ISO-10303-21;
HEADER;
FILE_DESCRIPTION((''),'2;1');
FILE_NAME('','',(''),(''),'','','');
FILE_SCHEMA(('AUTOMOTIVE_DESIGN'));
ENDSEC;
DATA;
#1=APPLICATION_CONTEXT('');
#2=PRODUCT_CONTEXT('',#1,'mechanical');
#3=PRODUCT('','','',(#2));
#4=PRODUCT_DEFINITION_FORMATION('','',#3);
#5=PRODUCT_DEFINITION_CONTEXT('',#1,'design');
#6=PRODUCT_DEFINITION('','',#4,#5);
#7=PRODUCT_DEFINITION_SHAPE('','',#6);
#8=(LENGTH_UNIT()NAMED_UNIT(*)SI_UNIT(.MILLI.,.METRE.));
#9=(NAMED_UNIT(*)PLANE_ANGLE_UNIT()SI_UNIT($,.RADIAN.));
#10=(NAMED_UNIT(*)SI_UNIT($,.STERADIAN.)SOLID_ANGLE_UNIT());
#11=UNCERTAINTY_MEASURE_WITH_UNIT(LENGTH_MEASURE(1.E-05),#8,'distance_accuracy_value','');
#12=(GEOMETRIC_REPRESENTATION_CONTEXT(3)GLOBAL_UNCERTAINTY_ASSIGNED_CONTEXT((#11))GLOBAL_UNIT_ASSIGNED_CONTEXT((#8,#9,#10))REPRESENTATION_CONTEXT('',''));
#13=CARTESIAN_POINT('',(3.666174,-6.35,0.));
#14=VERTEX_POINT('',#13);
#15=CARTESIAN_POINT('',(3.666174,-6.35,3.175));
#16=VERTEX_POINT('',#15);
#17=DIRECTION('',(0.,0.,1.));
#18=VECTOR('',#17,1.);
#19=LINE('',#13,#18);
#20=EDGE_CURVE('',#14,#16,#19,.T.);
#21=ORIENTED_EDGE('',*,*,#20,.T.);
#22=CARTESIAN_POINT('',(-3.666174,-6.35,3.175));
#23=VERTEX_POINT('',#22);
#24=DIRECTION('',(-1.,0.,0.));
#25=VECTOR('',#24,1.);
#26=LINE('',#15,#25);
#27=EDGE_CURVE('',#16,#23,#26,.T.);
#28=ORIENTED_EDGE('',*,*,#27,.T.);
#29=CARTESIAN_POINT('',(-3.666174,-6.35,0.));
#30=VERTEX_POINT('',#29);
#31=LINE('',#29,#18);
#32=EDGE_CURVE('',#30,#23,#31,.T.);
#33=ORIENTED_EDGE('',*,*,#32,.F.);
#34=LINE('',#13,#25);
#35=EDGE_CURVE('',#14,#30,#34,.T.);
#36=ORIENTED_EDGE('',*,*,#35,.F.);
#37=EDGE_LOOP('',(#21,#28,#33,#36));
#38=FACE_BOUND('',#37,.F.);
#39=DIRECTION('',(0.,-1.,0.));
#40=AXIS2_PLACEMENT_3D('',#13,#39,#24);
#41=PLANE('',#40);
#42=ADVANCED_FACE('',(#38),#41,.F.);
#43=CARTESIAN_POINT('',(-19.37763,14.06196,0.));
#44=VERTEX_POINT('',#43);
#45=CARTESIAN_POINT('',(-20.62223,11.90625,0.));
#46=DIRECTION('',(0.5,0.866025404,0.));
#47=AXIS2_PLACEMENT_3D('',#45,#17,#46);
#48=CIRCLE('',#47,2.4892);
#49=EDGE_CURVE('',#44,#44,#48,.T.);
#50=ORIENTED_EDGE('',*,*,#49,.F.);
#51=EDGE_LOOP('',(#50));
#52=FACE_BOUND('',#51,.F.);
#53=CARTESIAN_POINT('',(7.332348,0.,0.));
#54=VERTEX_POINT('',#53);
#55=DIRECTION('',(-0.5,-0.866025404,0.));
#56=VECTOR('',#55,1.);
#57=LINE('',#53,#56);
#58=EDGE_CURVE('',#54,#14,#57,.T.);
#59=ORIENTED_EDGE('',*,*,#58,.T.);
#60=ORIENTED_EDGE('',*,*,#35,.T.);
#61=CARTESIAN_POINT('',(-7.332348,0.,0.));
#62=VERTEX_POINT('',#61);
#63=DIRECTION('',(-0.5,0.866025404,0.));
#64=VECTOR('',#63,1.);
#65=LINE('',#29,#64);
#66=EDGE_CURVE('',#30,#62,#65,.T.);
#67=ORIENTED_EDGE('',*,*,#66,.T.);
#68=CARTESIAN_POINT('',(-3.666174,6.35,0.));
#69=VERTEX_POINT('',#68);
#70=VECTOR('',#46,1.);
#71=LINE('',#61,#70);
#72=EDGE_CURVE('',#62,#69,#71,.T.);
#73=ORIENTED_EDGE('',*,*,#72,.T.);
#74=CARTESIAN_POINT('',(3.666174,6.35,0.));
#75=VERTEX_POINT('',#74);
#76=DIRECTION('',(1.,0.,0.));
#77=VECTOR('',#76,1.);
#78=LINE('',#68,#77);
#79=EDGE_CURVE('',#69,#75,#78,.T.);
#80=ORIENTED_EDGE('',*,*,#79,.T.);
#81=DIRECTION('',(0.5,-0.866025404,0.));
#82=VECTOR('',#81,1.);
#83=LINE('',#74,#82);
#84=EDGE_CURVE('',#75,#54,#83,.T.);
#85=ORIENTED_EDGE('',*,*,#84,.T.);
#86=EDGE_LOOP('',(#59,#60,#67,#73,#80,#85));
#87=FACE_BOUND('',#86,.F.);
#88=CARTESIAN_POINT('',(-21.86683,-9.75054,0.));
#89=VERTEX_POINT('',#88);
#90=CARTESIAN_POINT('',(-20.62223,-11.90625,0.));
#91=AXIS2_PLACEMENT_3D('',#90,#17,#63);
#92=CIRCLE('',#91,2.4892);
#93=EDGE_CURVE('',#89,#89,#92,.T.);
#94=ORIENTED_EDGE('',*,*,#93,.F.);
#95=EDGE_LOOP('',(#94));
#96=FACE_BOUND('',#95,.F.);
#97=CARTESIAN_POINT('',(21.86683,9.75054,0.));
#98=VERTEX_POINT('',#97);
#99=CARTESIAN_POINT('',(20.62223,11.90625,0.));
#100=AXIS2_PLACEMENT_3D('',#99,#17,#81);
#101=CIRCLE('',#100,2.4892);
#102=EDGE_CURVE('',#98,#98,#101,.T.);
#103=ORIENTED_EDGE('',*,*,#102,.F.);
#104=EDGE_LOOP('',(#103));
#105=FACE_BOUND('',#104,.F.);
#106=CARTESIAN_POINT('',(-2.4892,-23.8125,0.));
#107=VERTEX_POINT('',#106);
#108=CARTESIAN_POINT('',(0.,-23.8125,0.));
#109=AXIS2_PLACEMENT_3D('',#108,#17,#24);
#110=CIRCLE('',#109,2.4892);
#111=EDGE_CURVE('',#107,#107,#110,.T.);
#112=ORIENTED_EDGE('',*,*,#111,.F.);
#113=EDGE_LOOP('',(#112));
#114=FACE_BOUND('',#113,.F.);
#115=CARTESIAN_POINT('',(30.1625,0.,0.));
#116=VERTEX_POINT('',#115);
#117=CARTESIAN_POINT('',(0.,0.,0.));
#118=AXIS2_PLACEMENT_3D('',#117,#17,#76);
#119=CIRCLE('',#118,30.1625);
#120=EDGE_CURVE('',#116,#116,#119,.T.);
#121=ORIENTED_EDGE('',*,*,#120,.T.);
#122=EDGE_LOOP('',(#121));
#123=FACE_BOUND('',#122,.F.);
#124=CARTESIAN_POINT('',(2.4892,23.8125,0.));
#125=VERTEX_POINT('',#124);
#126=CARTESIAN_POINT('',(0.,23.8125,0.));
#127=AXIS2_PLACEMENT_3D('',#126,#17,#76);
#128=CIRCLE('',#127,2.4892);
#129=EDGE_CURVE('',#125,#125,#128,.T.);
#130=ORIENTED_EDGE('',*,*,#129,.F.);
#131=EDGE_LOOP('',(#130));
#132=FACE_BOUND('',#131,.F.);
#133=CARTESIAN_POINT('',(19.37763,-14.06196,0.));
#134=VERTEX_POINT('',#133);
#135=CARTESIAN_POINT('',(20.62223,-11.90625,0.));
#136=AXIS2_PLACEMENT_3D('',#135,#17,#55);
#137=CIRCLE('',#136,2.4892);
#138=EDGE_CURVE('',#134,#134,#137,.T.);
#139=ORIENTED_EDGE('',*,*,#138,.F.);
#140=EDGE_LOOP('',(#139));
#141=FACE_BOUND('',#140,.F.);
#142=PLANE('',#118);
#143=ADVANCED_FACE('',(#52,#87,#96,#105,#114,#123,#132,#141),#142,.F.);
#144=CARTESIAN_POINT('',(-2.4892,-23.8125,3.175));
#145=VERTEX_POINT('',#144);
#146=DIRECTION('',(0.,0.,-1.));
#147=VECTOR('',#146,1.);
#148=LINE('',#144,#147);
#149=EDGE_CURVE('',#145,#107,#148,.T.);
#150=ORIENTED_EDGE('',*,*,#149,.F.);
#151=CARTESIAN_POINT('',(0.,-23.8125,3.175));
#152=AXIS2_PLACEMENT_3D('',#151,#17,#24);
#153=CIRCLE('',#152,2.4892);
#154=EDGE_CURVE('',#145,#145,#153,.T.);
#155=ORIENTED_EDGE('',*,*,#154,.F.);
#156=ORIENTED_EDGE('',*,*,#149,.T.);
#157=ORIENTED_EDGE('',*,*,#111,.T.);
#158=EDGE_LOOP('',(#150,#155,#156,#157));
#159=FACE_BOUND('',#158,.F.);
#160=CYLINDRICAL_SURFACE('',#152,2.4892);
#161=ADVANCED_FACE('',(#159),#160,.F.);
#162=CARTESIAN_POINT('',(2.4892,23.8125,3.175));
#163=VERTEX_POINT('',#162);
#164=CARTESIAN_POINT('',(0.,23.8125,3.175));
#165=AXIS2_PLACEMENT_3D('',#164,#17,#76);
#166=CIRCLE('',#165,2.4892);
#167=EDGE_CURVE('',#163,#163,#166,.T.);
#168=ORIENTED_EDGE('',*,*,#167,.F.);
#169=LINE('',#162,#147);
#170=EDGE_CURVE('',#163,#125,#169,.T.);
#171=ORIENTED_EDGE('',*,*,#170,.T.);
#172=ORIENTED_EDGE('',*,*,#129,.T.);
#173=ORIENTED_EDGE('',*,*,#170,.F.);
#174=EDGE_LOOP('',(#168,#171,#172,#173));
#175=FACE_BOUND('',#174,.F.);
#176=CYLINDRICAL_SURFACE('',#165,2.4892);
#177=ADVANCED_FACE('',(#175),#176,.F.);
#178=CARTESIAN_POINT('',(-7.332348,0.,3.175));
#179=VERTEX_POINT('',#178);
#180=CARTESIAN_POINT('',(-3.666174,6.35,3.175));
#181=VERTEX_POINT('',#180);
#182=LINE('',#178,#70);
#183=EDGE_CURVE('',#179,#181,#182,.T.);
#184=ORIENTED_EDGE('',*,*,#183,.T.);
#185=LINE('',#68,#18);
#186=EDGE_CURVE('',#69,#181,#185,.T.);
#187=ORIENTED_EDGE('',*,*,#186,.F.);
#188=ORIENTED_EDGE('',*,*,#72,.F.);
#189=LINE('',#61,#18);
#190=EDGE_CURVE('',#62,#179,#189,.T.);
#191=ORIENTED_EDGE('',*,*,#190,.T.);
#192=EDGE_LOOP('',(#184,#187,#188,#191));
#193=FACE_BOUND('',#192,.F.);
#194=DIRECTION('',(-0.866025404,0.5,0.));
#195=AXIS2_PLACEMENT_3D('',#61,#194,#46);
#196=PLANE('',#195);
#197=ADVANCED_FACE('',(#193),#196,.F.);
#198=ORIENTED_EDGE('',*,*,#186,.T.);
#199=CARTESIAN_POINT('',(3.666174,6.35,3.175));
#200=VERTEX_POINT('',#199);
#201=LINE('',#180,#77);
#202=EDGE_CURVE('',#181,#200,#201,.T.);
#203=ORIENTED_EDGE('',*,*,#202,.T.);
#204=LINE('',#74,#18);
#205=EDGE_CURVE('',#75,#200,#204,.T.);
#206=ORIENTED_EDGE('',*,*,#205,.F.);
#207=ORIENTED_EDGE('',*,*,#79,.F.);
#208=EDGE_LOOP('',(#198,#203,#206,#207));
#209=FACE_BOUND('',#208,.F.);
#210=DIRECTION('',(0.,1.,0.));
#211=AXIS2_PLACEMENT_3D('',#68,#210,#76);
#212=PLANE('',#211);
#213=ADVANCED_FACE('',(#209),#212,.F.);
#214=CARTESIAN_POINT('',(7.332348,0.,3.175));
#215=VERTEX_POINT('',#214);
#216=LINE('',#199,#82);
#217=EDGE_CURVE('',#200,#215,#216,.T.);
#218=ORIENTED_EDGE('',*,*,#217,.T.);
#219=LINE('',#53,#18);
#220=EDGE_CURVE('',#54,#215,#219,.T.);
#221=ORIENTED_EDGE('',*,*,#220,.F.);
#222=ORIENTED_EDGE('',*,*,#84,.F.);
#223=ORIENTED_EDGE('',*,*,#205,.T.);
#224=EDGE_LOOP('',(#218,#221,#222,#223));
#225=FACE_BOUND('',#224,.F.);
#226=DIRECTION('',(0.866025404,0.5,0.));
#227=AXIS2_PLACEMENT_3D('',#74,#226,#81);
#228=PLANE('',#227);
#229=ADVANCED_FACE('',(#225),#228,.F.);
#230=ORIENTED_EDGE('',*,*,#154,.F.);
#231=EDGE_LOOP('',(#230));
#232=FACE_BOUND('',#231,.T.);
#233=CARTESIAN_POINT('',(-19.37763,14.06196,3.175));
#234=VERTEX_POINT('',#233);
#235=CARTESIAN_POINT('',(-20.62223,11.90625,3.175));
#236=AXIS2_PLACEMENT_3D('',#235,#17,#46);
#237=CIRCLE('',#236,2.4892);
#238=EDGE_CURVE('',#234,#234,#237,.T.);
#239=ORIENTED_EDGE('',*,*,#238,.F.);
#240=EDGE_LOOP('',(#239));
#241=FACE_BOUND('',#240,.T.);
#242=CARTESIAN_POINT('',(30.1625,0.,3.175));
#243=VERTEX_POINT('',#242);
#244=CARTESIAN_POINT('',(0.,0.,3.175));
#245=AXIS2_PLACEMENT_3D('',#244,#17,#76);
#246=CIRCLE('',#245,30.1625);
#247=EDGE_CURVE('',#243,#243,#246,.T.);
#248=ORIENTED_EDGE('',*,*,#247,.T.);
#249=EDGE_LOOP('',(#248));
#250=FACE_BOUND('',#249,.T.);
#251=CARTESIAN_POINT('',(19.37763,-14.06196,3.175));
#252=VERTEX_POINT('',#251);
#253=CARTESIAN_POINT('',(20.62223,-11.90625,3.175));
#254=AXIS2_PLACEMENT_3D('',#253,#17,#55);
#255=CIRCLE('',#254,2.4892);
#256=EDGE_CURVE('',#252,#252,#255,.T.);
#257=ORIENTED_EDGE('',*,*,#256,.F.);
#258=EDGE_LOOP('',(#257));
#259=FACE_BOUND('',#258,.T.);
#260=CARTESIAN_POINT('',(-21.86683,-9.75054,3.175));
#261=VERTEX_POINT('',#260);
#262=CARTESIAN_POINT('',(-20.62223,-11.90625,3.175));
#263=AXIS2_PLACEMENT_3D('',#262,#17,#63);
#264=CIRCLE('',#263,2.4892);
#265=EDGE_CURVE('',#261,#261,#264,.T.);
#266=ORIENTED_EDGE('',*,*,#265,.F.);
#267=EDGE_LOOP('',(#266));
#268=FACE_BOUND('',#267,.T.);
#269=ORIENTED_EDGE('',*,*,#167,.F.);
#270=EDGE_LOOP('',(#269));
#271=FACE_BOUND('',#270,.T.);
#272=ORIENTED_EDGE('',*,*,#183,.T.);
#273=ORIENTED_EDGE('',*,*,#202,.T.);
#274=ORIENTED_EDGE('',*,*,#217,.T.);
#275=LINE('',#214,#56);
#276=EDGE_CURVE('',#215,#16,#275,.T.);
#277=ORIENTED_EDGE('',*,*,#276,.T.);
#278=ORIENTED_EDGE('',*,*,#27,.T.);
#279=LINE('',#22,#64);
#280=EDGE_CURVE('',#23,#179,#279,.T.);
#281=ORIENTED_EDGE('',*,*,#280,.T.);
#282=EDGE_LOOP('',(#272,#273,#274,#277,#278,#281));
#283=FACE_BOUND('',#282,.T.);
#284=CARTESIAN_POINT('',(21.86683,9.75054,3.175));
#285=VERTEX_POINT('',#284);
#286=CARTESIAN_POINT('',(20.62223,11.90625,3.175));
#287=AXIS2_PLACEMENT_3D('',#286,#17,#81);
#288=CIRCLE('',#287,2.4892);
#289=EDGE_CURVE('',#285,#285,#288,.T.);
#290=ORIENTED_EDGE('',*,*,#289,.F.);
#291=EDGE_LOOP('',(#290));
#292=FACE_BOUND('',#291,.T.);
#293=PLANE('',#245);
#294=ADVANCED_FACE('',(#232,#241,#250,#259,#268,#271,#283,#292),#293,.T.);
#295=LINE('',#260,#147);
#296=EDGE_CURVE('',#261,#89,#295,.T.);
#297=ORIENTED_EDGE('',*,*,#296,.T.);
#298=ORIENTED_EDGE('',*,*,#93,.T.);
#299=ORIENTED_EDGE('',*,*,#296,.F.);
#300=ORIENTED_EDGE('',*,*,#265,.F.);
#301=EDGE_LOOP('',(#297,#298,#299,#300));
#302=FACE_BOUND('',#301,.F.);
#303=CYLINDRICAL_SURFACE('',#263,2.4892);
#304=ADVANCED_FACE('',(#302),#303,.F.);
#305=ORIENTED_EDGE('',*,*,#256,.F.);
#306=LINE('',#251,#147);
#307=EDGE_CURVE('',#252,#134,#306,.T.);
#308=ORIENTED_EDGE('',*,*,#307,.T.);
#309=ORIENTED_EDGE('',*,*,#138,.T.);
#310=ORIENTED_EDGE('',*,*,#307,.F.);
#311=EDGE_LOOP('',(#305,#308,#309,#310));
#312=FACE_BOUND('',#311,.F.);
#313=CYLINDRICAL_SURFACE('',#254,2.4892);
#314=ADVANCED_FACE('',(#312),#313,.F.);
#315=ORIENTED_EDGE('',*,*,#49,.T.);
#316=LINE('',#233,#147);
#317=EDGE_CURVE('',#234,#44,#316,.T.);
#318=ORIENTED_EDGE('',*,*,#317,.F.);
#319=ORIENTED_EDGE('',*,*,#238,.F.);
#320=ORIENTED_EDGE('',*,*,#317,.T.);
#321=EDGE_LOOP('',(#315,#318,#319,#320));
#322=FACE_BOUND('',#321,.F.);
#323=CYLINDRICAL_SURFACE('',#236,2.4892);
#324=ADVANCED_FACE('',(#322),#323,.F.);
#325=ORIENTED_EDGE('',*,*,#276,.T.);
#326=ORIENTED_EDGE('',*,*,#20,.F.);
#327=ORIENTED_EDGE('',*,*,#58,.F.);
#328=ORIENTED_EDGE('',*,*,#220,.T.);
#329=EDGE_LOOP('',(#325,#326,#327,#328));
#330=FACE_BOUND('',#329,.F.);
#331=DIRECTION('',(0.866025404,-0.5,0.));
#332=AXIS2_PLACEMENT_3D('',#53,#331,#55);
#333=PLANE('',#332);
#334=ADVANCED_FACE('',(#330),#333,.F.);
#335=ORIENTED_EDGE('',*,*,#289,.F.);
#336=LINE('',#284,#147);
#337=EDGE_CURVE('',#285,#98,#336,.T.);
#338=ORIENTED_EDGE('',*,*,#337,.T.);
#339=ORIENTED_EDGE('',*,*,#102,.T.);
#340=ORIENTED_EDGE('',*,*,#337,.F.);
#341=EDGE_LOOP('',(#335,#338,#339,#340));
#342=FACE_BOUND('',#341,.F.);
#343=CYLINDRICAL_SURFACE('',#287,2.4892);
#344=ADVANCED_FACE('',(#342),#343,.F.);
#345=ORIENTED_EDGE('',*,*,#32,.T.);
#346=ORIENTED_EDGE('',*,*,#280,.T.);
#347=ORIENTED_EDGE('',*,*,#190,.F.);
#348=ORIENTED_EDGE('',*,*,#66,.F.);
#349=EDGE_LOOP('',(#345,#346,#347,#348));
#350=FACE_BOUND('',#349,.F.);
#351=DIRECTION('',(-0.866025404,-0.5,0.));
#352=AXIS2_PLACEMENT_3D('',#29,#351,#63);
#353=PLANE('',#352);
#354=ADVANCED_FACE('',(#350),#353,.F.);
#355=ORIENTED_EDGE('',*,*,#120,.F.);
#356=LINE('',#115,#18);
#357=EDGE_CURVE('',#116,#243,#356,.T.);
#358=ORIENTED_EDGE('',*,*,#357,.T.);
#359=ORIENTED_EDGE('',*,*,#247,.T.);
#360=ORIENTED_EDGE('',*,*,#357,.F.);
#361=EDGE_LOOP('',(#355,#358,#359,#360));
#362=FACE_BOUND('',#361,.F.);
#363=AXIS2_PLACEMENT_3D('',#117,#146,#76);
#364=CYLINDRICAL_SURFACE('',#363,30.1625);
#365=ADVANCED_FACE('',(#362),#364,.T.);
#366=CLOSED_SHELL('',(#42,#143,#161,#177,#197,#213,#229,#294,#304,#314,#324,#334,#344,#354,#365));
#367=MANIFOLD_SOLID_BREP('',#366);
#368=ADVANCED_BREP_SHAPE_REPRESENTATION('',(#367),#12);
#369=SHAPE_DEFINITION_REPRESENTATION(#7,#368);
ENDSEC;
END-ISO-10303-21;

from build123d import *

# Parameters (mm, degrees)
F0_R            = 30.1625
F1_DEPTH        = 3.175
F2_R            = 2.4892
F3_DEPTH        = 3.176
F3_COPIES_COUNT = 6
F4_R            = 2.3622
F5_DEPTH        = 3.176


# Not quite as in the source:
# - a pattern or mirror of a feature is missing from the dataset's text; its kind, count and spacing are read off the source's solid


with BuildPart() as f1:
    # F0 (on Top) → F1 (new body)
    with BuildSketch(Plane.XY):
        Circle(F0_R)
        Polygon((7.3323484187, 0), (3.6661742094, -6.35), (-3.6661742094, -6.35), (-7.3323484187, 0), (-3.6661742094, 6.35), (3.6661742094, 6.35), align=None, mode=Mode.SUBTRACT)
    extrude(amount=F1_DEPTH)

    # F2 (on face) → F3 (cut, through all)
    with BuildSketch(Plane.XY.offset(3.175)):
        with Locations((0, 23.8125)):
            Circle(F2_R)
    f3 = extrude(amount=-F3_DEPTH, mode=Mode.SUBTRACT)

    # F3_copies: F3 ×6 about axis
    f3_copies_axis = Axis((0, 0, 0), (0, 0, 1))
    for i in range(1, F3_COPIES_COUNT):
        add(f3.rotate(f3_copies_axis, i * 360 / F3_COPIES_COUNT), mode=Mode.SUBTRACT)

    # F4 (on face) → F5 (cut, through all)
    with BuildSketch(Plane.XY.offset(3.175)):
        with Locations((0, 40.2743678674)):
            Circle(F4_R)
        with Locations((38.3032, 12.4454641087)):
            Circle(F4_R)
        with Locations((23.6726794779, -32.5826480425)):
            Circle(F4_R)
        with Locations((-23.6726794779, -32.5826480425)):
            Circle(F4_R)
        with Locations((-38.3032, 12.4454641087)):
            Circle(F4_R)
    extrude(amount=-F5_DEPTH, mode=Mode.SUBTRACT)


solid = f1.part
